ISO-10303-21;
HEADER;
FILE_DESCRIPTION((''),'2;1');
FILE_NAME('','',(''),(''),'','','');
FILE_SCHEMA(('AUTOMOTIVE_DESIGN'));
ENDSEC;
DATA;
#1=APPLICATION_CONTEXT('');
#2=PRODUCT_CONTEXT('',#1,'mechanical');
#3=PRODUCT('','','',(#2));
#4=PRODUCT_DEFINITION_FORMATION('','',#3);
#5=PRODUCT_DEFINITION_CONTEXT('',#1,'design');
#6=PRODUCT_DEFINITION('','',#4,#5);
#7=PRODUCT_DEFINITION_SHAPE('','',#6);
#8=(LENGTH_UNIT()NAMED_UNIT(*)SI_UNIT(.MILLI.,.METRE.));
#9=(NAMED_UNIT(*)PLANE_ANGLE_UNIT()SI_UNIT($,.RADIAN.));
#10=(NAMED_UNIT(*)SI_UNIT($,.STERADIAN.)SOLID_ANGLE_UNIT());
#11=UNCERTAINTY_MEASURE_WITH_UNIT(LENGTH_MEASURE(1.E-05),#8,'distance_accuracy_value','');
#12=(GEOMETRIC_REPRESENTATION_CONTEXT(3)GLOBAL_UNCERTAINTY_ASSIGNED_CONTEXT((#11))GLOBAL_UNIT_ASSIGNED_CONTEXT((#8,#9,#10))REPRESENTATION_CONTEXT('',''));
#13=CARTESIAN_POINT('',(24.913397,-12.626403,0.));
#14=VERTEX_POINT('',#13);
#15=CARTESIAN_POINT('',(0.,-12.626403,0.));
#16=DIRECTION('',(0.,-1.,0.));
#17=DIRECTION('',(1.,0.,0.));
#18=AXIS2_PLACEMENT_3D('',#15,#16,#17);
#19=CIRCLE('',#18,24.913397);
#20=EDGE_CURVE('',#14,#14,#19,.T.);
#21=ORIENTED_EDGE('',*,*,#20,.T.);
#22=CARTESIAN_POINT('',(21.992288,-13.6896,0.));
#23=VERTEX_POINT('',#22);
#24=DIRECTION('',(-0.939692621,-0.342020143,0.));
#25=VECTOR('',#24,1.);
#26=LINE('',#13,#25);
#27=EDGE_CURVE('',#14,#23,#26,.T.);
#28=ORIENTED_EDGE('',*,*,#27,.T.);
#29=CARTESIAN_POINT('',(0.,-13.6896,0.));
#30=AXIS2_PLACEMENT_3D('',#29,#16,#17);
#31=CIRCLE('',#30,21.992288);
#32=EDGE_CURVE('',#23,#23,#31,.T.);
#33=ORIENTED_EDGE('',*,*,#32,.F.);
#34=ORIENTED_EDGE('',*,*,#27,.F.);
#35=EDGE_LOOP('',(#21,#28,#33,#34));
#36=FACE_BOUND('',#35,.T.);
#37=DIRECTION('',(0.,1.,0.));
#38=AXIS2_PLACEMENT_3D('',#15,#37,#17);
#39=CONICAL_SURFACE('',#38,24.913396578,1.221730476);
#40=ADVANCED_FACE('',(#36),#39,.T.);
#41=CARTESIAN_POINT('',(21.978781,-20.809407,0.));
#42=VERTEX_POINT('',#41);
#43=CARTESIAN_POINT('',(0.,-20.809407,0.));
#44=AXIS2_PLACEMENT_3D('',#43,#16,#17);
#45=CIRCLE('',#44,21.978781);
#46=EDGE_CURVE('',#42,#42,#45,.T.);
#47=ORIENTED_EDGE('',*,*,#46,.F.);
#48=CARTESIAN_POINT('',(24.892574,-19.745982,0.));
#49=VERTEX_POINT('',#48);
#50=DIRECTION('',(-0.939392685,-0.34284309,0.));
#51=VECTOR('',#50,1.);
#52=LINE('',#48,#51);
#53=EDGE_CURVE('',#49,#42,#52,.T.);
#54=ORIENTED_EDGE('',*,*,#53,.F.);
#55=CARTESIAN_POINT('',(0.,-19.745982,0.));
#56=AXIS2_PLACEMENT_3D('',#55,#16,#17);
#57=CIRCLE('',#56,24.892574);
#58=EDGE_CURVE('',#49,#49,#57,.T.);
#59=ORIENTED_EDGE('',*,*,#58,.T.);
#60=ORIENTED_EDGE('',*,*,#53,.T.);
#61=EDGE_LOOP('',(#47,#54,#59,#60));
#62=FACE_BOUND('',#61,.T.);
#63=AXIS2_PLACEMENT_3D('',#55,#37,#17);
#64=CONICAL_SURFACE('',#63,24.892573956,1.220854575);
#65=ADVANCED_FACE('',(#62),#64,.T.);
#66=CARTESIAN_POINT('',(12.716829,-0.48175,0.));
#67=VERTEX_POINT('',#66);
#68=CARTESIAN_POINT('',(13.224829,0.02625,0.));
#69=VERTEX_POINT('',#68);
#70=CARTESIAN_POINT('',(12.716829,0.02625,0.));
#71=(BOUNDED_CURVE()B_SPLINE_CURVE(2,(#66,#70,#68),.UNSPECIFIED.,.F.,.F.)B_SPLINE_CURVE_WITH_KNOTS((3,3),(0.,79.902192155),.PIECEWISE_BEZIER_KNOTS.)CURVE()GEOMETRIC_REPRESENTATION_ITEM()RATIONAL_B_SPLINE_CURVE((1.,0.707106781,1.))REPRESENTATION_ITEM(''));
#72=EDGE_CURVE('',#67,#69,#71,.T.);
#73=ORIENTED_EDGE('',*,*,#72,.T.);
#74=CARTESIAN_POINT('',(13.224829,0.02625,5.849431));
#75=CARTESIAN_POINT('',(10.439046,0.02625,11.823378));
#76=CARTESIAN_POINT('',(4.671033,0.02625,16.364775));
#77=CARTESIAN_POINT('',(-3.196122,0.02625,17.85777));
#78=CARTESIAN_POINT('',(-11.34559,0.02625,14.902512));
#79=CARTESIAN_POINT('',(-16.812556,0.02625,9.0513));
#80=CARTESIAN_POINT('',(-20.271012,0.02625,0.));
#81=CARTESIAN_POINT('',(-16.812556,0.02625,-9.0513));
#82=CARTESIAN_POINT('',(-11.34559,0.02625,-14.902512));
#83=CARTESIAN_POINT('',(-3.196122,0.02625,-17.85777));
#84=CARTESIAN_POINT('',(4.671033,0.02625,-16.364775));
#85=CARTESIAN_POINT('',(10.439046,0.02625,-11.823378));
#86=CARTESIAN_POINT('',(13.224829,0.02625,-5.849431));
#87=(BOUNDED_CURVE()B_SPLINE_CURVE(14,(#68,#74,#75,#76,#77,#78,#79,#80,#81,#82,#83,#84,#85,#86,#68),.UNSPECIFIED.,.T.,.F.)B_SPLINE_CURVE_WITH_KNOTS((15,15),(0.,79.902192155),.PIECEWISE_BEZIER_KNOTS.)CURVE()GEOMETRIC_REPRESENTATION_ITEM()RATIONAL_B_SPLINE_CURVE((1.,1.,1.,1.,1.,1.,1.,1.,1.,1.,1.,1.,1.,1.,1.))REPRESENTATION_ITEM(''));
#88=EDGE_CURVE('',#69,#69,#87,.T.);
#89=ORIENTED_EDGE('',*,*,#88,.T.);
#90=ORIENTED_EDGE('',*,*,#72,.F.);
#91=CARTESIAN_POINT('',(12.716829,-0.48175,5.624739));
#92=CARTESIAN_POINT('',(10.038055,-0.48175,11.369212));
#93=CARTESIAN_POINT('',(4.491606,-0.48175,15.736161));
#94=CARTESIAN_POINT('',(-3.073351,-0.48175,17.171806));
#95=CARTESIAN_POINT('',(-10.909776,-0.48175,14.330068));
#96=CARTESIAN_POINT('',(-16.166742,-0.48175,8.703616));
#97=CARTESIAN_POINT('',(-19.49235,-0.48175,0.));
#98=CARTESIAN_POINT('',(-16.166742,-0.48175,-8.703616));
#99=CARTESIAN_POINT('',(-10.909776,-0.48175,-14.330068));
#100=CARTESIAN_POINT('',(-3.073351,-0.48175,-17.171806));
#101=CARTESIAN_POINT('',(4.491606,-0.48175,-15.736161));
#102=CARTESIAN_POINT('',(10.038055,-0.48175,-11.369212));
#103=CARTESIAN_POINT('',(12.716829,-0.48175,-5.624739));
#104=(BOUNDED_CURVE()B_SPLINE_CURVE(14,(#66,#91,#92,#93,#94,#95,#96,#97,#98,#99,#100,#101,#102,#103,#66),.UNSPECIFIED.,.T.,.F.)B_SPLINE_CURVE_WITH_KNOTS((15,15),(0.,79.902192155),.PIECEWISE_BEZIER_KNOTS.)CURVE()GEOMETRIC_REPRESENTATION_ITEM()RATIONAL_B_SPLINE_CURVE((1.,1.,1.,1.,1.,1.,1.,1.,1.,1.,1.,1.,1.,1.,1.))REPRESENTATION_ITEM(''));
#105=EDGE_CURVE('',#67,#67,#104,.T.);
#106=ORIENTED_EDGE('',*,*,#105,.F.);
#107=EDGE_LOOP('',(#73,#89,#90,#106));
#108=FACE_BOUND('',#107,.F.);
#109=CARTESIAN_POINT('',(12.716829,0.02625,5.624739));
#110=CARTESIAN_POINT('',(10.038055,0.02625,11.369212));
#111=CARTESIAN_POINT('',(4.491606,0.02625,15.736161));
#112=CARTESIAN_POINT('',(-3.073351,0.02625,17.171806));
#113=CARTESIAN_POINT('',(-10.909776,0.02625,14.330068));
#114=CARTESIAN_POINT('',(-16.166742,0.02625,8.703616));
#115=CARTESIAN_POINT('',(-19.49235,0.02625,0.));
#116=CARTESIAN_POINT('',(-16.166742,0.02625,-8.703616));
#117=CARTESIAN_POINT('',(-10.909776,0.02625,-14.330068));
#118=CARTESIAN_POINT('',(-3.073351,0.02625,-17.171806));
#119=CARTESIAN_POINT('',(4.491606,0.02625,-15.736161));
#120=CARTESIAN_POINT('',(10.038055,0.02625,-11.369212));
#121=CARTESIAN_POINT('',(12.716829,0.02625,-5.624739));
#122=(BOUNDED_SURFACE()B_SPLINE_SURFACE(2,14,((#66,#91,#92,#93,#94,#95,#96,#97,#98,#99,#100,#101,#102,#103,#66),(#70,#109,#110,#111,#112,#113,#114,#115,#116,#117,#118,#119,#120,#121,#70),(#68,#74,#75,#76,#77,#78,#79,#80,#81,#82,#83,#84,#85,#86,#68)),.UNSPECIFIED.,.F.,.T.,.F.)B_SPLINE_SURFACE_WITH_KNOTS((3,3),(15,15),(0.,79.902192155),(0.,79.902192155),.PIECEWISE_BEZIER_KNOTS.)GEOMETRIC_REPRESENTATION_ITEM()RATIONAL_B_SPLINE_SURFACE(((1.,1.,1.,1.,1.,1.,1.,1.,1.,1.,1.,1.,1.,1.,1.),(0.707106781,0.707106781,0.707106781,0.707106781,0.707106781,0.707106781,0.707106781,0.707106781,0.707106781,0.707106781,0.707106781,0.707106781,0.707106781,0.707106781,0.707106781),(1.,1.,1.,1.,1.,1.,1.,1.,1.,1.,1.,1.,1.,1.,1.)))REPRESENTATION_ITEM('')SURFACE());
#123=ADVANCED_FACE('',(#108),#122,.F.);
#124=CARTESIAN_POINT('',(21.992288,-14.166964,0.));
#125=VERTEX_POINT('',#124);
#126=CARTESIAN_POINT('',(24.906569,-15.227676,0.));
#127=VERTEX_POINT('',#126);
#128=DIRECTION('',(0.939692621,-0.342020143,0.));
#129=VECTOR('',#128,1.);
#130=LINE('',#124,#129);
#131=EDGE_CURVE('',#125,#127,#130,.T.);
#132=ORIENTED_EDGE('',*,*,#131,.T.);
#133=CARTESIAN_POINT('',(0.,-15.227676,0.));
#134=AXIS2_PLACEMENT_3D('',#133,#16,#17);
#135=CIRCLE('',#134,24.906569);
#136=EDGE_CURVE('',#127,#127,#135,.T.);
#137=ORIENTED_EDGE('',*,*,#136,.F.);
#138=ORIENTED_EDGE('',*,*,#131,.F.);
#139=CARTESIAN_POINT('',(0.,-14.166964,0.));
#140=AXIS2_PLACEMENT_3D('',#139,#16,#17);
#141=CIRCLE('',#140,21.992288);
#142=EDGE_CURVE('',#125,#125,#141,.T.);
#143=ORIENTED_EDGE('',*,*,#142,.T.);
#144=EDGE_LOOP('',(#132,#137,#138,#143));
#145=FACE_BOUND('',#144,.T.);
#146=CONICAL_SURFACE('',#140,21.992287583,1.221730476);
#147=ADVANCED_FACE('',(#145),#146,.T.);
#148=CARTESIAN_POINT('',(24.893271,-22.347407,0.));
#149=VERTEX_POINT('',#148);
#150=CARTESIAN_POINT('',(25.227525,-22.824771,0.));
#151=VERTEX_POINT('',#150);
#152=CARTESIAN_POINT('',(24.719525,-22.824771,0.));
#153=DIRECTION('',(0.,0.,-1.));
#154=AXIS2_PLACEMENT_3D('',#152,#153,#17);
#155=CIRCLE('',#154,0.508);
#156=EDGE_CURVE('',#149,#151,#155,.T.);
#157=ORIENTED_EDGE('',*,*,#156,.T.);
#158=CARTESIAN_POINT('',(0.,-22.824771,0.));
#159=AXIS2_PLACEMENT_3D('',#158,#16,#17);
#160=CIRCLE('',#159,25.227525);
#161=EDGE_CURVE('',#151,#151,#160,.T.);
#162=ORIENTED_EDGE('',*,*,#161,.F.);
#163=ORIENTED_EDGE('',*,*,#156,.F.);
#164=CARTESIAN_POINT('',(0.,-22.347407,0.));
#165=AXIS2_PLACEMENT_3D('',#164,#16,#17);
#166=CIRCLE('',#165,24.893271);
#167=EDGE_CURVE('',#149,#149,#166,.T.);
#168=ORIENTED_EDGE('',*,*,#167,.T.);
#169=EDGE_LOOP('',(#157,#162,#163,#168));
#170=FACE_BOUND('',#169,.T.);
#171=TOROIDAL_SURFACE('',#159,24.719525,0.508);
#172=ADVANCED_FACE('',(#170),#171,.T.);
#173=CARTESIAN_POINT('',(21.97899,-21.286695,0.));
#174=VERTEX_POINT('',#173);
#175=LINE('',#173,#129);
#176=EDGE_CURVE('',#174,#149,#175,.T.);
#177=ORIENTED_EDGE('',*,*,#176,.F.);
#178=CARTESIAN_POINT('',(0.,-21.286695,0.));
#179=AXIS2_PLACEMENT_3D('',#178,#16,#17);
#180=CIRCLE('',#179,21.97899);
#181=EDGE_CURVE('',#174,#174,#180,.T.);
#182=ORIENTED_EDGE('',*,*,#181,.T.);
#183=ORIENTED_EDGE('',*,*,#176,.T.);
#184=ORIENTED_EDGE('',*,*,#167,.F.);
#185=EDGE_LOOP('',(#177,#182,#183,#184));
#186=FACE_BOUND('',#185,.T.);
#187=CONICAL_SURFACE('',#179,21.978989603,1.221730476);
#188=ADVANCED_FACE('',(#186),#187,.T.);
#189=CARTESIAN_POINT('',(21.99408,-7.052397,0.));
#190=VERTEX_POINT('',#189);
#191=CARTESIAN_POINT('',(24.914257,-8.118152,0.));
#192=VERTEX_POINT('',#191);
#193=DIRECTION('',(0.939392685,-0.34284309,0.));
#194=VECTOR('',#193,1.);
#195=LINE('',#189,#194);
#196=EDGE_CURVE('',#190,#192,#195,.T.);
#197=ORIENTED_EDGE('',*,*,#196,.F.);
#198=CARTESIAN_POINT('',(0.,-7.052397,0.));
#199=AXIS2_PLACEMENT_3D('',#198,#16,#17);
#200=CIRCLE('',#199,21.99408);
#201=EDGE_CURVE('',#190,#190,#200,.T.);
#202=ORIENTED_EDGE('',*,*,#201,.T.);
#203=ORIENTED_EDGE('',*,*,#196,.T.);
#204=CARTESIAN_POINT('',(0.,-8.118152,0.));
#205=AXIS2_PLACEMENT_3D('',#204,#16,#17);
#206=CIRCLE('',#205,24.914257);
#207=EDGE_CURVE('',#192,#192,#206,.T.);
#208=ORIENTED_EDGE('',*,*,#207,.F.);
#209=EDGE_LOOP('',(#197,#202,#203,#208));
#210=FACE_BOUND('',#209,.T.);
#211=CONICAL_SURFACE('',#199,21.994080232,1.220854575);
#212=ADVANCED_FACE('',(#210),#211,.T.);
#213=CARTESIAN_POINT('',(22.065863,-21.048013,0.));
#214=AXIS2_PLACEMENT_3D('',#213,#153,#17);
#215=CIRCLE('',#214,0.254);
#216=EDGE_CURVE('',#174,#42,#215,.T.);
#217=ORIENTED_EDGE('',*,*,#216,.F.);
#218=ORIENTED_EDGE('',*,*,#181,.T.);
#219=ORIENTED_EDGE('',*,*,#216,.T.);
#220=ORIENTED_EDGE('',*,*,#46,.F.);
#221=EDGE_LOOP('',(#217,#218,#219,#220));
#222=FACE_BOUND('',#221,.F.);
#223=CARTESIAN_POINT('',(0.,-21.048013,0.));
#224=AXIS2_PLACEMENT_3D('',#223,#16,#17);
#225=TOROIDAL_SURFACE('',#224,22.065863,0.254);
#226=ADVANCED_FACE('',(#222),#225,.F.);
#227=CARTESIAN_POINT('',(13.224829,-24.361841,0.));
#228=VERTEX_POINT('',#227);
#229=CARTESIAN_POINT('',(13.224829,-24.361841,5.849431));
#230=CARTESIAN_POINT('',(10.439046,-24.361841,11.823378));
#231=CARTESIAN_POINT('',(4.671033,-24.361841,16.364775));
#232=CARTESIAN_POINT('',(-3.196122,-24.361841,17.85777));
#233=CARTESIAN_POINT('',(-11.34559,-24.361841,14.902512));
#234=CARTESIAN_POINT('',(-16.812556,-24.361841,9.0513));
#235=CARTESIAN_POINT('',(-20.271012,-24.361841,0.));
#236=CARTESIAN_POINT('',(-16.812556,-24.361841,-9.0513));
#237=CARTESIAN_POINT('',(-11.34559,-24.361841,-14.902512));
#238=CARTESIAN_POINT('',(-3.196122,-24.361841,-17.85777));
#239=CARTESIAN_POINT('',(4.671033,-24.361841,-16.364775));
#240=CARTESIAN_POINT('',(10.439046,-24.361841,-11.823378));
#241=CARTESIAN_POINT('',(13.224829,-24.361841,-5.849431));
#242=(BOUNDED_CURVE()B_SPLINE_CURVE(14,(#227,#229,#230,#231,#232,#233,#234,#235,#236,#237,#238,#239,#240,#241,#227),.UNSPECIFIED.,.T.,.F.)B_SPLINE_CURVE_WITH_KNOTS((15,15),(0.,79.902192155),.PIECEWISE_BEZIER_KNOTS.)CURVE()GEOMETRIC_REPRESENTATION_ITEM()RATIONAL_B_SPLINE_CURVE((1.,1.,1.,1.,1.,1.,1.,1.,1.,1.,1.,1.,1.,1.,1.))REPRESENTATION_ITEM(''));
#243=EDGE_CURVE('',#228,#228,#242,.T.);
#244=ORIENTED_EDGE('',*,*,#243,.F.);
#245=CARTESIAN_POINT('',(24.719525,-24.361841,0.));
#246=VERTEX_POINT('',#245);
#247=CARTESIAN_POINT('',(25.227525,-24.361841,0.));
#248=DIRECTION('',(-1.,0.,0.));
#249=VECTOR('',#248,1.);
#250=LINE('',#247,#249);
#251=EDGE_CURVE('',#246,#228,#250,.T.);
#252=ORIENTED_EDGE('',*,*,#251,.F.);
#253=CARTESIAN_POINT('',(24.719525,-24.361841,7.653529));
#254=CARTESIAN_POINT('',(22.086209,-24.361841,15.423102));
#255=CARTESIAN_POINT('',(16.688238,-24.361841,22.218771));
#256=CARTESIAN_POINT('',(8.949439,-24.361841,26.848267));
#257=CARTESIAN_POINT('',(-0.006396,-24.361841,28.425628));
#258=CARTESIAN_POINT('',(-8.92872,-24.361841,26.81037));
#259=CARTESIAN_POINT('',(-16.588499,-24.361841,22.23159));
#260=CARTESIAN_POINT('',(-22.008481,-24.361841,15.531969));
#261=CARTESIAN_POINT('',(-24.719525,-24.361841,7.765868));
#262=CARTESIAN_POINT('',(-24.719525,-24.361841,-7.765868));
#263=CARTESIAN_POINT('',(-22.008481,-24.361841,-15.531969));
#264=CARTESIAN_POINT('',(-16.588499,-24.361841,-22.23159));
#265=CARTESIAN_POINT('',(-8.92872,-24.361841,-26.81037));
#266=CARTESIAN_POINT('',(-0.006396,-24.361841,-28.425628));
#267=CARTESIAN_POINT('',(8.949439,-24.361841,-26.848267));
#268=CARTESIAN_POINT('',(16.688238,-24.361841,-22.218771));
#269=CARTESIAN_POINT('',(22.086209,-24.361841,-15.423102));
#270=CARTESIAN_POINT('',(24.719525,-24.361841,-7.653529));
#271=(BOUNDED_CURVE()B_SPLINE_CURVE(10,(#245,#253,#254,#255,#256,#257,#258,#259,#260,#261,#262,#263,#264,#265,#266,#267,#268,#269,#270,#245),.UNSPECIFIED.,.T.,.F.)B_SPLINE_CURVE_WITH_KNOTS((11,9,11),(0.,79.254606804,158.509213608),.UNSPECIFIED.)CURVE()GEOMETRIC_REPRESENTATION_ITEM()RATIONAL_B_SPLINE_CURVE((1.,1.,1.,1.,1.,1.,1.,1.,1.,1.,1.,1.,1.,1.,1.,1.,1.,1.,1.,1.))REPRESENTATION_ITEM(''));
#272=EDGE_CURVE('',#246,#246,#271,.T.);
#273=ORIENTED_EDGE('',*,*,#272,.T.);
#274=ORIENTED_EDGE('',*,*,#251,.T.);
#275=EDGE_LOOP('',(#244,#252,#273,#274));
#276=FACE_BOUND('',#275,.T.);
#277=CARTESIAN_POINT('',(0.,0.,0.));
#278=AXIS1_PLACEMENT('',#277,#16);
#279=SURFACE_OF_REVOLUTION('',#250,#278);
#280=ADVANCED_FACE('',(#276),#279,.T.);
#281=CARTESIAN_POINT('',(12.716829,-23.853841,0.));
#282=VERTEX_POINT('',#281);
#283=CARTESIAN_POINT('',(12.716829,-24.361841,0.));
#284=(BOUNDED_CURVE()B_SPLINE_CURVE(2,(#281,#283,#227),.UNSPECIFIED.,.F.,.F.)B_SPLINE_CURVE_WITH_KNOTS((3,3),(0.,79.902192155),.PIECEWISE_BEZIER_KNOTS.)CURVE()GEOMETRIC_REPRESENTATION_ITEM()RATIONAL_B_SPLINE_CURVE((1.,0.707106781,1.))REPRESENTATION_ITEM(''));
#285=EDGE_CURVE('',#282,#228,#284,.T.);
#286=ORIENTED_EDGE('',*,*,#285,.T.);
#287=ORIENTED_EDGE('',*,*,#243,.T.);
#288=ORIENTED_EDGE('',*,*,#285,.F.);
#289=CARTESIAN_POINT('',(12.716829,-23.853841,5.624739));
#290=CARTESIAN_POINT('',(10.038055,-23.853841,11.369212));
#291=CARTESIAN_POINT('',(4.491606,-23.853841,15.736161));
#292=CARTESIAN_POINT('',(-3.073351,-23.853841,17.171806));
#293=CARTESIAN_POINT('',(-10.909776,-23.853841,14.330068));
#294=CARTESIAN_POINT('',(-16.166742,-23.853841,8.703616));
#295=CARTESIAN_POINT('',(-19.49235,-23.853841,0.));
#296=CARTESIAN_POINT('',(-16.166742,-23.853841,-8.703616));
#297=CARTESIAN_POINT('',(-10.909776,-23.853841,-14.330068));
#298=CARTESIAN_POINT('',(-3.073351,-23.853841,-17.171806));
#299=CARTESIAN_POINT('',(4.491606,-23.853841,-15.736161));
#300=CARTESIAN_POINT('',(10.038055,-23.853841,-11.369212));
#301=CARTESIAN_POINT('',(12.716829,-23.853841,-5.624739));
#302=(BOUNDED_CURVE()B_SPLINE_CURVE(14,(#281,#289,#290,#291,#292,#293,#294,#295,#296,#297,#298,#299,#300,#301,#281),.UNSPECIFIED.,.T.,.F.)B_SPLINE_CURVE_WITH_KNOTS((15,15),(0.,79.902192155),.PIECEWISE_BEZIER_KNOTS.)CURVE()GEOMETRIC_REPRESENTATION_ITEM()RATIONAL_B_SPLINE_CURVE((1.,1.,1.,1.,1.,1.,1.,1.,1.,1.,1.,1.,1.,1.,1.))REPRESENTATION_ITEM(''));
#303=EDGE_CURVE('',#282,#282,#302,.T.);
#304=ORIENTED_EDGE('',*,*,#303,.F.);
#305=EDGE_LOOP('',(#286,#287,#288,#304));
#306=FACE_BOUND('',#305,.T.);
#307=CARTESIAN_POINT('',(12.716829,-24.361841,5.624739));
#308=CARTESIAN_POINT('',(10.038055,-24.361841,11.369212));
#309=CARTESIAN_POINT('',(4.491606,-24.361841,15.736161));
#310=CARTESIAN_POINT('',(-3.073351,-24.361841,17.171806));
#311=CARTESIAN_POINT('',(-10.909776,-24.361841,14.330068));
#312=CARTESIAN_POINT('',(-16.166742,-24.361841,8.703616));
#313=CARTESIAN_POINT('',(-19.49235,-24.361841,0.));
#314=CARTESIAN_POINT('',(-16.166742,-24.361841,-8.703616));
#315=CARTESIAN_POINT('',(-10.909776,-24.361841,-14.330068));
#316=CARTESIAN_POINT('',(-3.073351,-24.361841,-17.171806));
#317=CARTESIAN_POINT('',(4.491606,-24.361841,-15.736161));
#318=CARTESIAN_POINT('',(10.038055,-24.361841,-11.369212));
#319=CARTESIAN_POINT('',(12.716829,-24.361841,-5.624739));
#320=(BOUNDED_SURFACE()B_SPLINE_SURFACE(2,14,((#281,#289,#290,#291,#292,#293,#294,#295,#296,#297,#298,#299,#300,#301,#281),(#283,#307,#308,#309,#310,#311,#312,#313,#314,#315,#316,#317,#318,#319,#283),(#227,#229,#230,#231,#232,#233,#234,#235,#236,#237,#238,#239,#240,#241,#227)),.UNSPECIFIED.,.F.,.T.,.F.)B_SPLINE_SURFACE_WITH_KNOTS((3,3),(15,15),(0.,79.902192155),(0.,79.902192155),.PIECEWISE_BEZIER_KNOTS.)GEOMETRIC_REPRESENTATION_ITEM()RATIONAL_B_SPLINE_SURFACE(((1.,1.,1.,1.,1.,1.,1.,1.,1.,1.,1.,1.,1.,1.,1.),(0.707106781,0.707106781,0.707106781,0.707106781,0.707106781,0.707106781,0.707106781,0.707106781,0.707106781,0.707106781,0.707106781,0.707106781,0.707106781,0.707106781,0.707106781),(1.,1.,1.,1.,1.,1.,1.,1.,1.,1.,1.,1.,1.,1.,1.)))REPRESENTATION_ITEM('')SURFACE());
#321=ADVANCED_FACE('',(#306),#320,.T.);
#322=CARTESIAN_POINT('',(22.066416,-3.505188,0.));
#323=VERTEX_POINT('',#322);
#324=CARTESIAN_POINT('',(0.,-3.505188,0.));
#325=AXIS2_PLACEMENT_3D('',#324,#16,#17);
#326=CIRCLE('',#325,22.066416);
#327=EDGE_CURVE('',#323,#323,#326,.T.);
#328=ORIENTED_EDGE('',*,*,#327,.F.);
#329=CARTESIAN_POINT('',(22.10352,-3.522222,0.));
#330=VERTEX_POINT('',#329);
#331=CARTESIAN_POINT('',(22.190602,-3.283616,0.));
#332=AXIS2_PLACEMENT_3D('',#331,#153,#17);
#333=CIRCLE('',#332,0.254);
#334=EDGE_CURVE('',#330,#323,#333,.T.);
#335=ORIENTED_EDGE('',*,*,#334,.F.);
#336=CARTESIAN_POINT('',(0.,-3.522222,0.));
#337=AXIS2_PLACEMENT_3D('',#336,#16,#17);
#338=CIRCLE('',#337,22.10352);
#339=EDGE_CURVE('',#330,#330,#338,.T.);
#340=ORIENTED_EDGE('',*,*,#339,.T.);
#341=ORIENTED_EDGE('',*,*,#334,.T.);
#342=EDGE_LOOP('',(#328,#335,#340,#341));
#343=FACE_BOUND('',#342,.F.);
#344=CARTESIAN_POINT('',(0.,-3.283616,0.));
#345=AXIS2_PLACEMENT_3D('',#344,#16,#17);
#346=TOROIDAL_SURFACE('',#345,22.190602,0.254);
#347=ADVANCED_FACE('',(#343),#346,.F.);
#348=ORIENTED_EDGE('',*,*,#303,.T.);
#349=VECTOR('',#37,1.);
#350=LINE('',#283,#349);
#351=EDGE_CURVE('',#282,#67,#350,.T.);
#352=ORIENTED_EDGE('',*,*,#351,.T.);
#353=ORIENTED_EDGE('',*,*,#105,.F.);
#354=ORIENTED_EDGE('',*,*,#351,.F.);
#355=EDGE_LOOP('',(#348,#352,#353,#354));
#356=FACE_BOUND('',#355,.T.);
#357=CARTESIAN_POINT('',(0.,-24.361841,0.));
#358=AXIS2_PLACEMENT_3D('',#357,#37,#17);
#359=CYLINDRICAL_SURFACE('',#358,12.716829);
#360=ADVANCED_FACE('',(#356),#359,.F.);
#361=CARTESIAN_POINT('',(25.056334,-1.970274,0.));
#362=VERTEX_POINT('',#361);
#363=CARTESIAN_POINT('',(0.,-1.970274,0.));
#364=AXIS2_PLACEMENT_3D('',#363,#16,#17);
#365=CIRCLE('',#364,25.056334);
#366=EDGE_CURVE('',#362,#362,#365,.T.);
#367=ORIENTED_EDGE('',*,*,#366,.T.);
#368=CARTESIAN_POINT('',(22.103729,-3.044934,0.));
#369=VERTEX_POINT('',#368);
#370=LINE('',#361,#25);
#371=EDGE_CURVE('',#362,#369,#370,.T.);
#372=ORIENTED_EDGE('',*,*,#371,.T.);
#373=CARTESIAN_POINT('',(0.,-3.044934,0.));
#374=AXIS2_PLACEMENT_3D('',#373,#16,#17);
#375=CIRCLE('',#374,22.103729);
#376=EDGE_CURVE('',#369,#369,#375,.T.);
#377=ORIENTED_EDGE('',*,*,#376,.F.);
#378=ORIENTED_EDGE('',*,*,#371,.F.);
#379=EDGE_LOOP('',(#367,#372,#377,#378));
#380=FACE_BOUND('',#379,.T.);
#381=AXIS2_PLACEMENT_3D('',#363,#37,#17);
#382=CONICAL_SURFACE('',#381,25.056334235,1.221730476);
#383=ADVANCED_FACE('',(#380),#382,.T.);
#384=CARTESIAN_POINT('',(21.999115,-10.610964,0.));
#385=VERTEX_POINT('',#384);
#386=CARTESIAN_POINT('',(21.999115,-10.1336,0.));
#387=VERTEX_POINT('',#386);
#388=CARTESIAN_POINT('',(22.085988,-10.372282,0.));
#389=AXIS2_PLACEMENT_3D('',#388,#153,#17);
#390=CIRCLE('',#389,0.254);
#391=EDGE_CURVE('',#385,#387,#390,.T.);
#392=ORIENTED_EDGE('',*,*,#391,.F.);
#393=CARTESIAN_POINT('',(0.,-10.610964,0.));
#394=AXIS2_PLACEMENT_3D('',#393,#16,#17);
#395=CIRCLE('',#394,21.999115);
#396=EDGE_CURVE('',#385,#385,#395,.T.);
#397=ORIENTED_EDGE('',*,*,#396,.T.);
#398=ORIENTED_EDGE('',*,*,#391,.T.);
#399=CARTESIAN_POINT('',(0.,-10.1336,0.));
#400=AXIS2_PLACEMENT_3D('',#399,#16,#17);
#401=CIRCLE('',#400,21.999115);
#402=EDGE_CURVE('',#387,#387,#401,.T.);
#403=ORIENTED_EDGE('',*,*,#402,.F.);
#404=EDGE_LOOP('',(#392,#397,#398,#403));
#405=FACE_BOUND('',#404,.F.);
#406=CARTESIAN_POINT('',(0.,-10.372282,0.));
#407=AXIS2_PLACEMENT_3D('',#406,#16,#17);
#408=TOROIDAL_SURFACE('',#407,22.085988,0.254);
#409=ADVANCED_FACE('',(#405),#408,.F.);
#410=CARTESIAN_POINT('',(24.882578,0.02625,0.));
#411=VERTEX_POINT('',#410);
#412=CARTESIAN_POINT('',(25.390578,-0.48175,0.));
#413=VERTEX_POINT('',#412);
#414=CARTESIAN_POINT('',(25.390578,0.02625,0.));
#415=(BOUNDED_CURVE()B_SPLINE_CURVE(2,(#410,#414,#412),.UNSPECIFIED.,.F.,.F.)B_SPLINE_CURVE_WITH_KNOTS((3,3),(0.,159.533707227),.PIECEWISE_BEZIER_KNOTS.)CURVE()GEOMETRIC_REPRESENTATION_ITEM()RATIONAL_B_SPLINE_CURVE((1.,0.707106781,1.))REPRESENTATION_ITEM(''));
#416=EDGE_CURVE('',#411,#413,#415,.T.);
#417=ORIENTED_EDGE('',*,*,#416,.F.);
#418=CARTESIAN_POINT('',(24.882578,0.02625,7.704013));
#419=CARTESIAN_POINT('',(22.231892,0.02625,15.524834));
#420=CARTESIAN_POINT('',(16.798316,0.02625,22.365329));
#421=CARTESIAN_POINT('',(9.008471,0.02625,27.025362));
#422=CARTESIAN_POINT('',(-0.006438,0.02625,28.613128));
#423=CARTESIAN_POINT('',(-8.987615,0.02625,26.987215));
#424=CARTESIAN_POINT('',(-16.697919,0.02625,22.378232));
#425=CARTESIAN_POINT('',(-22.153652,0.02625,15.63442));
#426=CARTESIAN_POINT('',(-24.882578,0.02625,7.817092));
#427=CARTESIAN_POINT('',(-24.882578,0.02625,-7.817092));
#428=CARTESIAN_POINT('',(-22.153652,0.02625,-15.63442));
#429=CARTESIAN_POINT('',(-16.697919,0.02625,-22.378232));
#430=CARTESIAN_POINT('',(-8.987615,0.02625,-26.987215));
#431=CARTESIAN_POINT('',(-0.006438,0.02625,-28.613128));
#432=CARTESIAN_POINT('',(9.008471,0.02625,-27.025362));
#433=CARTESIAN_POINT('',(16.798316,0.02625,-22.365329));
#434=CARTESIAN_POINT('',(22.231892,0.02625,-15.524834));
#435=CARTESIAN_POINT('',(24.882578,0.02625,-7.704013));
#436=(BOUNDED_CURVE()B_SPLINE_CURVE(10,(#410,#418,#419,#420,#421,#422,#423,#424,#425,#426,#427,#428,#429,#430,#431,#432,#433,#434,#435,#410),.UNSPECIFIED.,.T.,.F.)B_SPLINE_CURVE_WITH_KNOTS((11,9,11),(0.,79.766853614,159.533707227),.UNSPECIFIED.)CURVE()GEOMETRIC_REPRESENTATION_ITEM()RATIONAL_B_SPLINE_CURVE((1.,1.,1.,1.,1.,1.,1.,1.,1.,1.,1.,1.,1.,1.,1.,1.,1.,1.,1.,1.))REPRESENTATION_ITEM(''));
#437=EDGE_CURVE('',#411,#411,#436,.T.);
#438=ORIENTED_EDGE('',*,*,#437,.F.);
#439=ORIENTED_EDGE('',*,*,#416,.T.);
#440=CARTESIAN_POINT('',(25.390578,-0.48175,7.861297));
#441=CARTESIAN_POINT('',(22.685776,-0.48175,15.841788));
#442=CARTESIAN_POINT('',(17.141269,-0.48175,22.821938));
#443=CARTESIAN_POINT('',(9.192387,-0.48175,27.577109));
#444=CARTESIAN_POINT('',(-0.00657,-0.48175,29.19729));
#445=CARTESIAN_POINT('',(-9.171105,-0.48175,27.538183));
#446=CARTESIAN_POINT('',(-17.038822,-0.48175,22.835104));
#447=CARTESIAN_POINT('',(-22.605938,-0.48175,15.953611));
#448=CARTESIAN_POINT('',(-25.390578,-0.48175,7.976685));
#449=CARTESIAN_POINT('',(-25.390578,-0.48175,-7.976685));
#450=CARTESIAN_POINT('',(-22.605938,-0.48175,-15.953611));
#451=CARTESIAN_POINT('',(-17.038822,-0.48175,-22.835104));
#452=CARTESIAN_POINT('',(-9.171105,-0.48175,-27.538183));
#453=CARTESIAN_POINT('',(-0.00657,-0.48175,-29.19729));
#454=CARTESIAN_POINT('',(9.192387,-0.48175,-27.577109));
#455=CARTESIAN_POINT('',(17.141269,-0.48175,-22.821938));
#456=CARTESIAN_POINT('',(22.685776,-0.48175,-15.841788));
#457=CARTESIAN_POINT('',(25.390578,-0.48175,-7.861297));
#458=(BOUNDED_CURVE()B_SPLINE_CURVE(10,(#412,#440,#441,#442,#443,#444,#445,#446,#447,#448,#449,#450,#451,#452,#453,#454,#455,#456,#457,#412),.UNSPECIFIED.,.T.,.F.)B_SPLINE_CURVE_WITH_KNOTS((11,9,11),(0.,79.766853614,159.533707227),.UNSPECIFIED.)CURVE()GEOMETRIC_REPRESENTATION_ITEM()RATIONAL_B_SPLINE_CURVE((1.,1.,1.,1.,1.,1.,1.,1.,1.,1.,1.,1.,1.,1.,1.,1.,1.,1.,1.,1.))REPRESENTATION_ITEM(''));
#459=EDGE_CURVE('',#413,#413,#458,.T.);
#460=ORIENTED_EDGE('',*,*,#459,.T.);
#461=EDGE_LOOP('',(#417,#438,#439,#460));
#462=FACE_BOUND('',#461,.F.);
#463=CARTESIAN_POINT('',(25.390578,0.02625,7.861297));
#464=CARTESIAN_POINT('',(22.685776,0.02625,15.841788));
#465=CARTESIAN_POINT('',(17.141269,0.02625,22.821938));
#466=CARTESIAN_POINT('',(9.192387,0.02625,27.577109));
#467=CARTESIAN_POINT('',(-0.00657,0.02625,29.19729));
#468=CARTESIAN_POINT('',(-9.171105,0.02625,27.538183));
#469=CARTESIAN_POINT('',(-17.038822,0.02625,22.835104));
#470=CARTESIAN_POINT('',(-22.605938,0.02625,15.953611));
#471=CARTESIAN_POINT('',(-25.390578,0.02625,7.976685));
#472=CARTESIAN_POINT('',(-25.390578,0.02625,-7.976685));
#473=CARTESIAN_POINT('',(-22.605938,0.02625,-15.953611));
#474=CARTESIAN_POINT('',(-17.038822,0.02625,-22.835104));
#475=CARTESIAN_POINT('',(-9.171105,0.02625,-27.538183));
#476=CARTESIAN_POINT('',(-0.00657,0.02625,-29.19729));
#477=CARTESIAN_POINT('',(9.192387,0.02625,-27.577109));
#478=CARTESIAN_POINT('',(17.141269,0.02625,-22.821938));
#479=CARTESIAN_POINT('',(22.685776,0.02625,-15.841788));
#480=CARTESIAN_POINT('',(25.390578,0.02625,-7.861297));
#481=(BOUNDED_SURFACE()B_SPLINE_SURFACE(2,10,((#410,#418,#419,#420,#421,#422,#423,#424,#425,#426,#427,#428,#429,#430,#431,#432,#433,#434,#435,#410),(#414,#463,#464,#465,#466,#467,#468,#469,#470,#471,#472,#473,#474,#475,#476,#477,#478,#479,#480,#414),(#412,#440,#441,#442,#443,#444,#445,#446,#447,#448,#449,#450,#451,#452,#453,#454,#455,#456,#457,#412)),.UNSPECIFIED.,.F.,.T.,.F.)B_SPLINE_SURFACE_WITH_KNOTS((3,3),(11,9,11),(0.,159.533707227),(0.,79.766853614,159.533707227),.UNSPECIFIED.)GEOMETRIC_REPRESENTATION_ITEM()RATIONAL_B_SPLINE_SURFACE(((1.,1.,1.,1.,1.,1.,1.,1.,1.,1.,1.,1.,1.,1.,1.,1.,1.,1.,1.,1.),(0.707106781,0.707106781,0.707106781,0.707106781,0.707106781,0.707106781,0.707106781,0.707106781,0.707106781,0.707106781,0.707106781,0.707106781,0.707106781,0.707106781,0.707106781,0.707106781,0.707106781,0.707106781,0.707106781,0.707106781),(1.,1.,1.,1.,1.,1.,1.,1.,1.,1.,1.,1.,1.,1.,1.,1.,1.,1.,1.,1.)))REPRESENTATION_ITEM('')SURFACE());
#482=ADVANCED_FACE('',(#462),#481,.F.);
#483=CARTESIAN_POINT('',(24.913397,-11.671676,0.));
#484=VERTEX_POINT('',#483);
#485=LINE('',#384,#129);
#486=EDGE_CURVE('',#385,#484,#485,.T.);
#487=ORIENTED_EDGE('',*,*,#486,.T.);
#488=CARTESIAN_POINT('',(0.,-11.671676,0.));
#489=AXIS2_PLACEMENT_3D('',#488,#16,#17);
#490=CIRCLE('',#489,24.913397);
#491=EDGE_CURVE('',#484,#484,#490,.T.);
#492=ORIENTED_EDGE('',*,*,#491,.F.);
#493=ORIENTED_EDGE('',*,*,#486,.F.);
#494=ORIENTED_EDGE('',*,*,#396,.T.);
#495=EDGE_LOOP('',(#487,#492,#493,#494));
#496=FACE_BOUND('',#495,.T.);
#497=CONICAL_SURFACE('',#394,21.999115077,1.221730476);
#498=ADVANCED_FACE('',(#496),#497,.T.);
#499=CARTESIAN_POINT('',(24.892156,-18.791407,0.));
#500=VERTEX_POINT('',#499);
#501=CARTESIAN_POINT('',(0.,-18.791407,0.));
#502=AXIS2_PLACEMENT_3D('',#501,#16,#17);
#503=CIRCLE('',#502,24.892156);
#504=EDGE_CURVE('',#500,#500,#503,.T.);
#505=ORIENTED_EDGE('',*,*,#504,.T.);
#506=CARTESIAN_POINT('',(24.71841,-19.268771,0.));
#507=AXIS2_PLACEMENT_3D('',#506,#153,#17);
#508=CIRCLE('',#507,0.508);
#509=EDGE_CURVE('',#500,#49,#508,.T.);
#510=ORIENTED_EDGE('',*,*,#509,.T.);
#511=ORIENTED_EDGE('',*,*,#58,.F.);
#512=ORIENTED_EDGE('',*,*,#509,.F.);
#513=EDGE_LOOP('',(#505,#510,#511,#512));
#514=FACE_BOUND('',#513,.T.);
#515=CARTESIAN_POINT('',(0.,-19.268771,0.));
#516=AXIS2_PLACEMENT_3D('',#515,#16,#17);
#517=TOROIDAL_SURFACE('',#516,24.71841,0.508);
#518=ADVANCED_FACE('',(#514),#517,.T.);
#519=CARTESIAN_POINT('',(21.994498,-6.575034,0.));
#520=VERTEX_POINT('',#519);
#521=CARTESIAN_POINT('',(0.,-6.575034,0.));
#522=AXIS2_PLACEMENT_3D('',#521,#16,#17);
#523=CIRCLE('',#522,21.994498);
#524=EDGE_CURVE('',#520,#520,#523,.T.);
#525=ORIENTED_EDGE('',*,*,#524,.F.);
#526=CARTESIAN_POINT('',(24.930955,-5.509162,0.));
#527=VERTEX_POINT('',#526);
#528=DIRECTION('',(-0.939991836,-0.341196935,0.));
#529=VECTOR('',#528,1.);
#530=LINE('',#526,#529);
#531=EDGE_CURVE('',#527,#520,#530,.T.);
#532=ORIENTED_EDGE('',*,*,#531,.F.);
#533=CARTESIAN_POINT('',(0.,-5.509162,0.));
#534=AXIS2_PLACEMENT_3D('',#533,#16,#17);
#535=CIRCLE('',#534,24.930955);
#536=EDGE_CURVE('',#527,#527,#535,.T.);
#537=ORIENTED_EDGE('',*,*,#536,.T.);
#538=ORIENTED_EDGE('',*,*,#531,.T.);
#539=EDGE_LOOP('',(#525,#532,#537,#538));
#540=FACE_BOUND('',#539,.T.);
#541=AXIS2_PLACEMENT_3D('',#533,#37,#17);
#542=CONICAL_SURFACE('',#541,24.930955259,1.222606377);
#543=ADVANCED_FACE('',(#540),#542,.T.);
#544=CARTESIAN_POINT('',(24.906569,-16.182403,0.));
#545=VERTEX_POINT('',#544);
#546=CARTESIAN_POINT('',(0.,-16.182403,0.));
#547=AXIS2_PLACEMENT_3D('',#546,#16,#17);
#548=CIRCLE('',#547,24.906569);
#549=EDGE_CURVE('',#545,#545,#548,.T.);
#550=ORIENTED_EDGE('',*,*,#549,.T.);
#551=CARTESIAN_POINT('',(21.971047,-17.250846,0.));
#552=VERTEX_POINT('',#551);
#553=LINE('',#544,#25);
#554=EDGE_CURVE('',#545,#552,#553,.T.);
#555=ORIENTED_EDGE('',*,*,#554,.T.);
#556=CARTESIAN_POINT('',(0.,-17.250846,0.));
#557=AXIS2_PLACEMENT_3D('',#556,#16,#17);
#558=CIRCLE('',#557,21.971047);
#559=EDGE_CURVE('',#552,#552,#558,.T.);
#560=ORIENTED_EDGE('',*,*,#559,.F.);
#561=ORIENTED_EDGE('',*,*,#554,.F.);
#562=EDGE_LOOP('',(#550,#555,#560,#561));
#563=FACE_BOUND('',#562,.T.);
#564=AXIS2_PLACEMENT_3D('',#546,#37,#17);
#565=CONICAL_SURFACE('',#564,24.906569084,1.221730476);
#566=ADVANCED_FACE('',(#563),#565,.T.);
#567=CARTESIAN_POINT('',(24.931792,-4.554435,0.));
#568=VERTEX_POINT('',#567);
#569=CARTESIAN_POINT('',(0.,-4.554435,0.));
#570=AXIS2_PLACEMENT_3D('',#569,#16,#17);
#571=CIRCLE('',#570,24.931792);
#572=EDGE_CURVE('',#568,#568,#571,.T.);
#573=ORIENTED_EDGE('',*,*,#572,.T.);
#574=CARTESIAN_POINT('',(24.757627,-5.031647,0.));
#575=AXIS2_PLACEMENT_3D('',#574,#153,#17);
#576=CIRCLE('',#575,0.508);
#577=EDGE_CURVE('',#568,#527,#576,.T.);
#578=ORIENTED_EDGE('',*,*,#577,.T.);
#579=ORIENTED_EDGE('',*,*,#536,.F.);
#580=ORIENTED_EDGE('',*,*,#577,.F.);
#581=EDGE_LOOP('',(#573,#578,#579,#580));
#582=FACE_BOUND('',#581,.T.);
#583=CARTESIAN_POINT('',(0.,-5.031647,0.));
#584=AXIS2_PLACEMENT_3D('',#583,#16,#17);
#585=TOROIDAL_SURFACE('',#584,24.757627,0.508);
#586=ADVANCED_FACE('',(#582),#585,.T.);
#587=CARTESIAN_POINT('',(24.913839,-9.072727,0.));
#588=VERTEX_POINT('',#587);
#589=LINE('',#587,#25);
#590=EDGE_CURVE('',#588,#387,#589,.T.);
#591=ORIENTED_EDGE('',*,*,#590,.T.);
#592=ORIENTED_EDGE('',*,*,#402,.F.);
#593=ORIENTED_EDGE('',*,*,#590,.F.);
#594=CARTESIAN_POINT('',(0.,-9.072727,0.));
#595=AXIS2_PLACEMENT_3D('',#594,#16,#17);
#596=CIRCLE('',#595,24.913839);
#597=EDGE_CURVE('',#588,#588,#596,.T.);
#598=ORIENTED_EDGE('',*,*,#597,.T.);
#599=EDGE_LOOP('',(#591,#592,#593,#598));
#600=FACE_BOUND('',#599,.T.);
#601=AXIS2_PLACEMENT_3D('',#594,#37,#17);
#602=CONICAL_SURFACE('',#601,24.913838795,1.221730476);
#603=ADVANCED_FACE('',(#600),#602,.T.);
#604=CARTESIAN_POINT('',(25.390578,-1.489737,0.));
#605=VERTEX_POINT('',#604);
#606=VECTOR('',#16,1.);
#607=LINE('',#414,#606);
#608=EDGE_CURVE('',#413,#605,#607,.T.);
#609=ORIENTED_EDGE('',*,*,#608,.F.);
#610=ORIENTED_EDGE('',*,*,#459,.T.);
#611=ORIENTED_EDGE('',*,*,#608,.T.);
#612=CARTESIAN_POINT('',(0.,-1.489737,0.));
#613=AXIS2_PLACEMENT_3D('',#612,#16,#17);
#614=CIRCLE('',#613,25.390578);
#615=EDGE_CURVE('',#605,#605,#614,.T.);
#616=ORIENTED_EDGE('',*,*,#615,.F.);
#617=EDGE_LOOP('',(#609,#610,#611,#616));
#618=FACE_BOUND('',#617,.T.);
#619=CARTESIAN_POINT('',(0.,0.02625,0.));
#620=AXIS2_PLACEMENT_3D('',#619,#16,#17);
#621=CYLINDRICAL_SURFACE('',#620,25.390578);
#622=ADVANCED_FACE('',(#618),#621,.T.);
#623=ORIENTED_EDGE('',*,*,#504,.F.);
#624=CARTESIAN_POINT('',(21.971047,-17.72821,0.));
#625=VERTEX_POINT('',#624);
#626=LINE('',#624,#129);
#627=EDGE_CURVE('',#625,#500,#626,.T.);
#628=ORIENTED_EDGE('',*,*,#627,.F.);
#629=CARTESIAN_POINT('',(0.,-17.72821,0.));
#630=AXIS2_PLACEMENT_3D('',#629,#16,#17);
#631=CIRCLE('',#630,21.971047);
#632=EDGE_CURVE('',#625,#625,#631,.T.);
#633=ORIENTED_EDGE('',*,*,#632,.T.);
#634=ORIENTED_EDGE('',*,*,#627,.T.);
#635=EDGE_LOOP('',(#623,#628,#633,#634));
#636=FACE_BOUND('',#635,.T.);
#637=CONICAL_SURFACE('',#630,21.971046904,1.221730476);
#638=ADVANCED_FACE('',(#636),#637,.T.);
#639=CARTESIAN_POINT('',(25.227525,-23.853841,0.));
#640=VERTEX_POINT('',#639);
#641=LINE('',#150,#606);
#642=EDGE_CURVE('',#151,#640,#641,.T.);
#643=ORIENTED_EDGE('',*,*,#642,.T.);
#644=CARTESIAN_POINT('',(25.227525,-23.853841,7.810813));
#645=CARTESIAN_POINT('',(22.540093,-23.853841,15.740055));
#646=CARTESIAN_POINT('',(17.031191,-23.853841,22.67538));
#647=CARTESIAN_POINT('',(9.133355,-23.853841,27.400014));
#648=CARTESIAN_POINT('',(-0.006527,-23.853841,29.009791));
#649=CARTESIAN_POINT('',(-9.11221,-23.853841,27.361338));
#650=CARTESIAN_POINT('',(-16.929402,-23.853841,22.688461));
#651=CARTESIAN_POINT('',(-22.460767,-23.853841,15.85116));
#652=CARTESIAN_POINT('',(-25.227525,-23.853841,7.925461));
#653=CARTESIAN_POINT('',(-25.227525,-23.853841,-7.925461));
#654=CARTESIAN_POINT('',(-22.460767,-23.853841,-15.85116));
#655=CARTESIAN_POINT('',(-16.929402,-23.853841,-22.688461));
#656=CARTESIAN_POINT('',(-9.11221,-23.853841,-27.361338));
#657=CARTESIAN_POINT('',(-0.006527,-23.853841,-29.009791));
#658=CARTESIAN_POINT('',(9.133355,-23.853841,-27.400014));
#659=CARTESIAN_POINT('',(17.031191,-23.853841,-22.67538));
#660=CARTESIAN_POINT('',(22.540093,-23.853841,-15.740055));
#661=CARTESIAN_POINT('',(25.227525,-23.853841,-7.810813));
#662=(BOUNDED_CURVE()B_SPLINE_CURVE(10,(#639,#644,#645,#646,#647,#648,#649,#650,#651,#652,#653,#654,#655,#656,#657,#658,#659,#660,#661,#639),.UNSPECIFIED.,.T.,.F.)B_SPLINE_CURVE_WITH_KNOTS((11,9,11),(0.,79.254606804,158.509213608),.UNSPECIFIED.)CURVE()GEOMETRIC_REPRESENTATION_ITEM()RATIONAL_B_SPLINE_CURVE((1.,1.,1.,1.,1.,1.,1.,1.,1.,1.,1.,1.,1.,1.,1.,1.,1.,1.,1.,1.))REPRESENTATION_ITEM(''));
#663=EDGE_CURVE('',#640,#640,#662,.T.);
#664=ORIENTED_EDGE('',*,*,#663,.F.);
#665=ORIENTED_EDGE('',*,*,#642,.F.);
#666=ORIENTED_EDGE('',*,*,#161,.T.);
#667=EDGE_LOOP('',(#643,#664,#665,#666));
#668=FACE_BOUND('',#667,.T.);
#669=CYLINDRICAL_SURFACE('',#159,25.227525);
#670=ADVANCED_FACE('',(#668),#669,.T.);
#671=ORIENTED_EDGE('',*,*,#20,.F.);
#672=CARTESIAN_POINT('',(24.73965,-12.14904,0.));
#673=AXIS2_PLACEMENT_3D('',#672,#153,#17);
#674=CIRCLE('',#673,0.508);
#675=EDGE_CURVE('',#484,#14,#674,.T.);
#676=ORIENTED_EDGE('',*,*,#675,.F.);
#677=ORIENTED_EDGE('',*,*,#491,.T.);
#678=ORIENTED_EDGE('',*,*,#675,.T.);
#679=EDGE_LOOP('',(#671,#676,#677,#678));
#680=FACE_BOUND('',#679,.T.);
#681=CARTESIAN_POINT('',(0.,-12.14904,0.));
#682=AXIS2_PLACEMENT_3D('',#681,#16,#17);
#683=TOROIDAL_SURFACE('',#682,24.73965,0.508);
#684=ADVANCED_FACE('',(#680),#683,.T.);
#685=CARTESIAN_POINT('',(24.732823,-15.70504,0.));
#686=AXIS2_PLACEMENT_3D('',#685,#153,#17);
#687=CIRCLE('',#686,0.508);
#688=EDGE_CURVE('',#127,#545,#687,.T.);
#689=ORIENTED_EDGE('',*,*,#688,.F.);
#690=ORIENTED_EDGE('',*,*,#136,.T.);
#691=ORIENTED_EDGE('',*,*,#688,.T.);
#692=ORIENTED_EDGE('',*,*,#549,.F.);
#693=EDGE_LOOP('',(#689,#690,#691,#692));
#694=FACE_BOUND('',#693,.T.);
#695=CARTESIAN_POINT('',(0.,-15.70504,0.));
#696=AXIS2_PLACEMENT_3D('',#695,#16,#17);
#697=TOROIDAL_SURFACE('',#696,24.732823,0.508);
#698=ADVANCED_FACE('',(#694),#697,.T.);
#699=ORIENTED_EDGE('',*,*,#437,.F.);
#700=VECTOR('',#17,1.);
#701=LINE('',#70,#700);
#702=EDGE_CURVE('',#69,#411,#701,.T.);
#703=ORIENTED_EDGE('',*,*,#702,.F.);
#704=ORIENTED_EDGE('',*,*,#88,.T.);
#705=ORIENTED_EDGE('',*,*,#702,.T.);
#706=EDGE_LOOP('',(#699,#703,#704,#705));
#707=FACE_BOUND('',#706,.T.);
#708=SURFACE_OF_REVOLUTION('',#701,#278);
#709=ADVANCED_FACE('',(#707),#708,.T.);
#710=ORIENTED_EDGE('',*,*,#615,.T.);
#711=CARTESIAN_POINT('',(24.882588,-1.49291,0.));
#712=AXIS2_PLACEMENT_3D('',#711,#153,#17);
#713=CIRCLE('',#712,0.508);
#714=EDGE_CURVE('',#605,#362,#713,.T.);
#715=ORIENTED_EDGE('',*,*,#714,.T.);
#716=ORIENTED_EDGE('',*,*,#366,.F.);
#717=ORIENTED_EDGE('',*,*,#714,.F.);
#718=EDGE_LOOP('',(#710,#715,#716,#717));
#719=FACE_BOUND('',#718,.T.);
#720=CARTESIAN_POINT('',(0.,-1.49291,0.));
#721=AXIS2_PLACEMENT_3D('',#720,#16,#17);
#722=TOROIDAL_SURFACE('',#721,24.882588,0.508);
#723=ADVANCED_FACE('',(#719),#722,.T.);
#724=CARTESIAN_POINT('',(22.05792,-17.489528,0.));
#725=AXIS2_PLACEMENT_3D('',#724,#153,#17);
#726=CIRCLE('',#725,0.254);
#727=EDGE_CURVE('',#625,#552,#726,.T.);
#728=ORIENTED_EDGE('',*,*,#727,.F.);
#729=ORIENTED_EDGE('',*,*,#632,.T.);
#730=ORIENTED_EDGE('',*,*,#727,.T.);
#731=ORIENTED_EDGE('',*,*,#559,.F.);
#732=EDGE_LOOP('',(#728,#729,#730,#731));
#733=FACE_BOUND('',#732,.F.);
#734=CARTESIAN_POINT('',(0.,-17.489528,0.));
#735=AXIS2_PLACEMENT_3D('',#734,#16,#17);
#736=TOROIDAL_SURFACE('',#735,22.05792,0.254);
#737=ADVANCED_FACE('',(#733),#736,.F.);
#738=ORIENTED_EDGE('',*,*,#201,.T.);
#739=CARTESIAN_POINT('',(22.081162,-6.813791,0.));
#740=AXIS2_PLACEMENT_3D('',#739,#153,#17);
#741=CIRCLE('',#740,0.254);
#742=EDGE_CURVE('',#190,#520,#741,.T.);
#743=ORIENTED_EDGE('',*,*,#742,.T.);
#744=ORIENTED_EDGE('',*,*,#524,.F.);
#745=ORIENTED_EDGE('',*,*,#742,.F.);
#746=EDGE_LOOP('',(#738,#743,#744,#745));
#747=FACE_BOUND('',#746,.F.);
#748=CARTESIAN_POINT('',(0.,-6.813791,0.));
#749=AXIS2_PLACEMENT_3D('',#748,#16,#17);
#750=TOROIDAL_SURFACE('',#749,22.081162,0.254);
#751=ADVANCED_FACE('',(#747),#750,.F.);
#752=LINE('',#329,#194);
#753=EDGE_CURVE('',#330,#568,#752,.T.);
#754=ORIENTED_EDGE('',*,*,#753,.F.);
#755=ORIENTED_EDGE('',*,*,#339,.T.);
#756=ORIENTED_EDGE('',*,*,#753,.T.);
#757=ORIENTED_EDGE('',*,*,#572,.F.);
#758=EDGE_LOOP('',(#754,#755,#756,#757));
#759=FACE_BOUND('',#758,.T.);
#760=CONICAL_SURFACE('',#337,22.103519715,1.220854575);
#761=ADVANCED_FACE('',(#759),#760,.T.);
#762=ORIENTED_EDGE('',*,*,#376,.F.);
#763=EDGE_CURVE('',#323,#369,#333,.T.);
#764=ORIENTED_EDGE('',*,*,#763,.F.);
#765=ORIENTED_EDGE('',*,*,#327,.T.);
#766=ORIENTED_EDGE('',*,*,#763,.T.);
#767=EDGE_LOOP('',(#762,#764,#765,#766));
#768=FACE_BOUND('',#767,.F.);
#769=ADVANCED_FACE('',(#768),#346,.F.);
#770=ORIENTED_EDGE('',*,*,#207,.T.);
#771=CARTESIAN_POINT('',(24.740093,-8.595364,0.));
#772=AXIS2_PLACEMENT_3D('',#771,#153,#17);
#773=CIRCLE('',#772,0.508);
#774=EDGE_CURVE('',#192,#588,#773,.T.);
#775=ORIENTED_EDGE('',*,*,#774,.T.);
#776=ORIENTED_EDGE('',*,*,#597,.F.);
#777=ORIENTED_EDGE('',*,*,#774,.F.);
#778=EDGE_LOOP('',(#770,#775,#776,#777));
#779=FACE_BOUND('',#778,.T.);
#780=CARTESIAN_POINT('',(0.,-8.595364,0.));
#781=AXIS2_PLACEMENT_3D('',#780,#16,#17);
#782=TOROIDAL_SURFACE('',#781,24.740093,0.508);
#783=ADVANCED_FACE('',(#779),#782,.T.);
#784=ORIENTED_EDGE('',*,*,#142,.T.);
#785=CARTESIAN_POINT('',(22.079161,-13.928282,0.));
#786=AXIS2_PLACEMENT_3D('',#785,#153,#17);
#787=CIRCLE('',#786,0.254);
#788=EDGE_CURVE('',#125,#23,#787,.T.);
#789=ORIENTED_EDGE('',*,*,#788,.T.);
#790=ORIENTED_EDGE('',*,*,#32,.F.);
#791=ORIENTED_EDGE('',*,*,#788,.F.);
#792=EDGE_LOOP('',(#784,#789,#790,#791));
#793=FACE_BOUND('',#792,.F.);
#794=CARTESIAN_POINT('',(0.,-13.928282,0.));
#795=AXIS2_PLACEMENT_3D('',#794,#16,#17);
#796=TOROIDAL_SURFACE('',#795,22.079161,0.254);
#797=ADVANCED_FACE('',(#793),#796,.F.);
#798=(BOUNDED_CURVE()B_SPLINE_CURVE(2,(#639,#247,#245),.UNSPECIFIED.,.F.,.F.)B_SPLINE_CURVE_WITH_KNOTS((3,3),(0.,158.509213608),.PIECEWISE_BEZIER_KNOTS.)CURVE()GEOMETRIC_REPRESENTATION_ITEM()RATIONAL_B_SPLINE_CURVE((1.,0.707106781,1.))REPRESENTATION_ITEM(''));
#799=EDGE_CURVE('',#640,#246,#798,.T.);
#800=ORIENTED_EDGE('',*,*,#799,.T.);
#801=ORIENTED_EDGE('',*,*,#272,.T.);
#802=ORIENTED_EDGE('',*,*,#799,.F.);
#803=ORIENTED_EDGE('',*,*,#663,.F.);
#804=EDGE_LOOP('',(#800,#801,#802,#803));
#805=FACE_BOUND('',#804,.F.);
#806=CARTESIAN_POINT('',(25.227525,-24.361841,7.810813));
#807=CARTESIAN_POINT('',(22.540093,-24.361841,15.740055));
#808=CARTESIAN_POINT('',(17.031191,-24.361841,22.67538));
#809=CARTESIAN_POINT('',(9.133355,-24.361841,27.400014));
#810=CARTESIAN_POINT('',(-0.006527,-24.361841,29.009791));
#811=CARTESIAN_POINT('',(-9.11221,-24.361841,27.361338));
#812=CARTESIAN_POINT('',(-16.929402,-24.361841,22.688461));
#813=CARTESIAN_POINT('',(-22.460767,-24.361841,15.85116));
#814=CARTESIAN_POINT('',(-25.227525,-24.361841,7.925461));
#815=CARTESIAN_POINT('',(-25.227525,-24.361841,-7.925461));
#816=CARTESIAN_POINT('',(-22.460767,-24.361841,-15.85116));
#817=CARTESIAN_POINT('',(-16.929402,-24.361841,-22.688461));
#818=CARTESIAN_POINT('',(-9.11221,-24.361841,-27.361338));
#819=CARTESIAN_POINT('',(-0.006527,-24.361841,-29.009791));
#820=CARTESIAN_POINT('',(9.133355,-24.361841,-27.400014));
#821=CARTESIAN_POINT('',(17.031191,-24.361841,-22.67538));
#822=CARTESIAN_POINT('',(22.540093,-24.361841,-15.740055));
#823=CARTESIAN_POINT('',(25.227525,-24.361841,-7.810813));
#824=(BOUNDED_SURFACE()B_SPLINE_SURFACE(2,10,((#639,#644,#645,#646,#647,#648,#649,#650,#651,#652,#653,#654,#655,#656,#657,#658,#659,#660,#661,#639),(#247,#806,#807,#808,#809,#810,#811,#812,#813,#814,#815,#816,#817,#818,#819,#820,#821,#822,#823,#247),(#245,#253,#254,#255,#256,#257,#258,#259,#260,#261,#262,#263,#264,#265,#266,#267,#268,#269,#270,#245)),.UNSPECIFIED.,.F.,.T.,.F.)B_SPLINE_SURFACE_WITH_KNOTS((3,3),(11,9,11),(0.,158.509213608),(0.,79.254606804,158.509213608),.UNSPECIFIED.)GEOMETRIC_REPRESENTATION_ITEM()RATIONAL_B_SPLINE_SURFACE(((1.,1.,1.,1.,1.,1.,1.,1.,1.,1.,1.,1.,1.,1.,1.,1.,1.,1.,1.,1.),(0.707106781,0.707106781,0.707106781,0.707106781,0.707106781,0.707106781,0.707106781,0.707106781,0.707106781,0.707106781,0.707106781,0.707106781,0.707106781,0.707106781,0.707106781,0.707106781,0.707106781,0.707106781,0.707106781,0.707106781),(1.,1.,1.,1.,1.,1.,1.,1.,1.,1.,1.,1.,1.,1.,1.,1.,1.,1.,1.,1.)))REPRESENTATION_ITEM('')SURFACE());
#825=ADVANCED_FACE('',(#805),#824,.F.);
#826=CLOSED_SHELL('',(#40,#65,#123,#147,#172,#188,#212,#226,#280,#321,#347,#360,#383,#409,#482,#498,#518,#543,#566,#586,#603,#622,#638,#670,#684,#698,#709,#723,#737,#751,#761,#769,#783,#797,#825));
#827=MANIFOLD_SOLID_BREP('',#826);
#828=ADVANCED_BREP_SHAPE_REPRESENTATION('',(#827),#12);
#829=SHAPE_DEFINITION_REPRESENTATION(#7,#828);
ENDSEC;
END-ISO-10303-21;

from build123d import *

# Parameters (mm, degrees)
F3_R = 0.508


with BuildPart() as f2:
    # F2: sweep along a path in F0
    with BuildLine(Plane.XZ) as f2_path:
        CenterArc((0, 0), 25.4, 0, 360)
    # F1 (on Right) → F2 (sweep)
    with BuildSketch(Plane.YZ):
        with BuildLine():
            Line((-24.3618413806, 12.7168288454), (0.0262497924, 12.7168288454))
            Line((0.0262497924, 12.7168288454), (0.0262497924, 25.390578095))
            Line((0.0262497924, 25.390578095), (-1.4897372673, 25.390578095))
            ThreePointArc((-1.4897372673, 25.390578095), (-1.782985913, 25.299625112), (-1.970273827, 25.0563342354))
            Line((-1.970273827, 25.0563342354), (-3.0449343395, 22.1037287434))
            ThreePointArc((-3.0449343395, 22.1037287434), (-3.2630920057, 21.9374324407), (-3.505187821, 22.0664163306))
            ThreePointArc((-3.505187821, 22.0664163306), (-3.5144515996, 22.084625219), (-3.5222220071, 22.1035197151))
            Line((-3.5222220071, 22.1035197151), (-4.5544351117, 24.9317915062))
            ThreePointArc((-4.5544351117, 24.9317915062), (-5.0320915531, 25.2656270218), (-5.5091624481, 24.9309552594))
            Line((-5.5091624481, 24.9309552594), (-6.5750335074, 21.9944983557))
            ThreePointArc((-6.5750335074, 21.9944983557), (-6.813568955, 21.8271624745), (-7.0523971757, 21.9940802323))
            Line((-7.0523971757, 21.9940802323), (-8.1181520949, 24.9142568519))
            ThreePointArc((-8.1181520949, 24.9142568519), (-8.5955860575, 25.2480925136), (-9.0727274301, 24.9138387952))
            Line((-9.0727274301, 24.9138387952), (-10.1336001047, 21.9991150768))
            ThreePointArc((-10.1336001047, 21.9991150768), (-10.3722820303, 21.8319881932), (-10.610963956, 21.9991150768))
            Line((-10.610963956, 21.9991150768), (-11.6716756767, 24.9133965778))
            ThreePointArc((-11.6716756767, 24.9133965778), (-12.1490395281, 25.247650345), (-12.6264033794, 24.9133965778))
            Line((-12.6264033794, 24.9133965778), (-13.6896001047, 21.9922875828))
            ThreePointArc((-13.6896001047, 21.9922875828), (-13.9282820303, 21.8251606992), (-14.166963956, 21.9922875828))
            Line((-14.166963956, 21.9922875828), (-15.2276756767, 24.9065690839))
            ThreePointArc((-15.2276756767, 24.9065690839), (-15.7050395281, 25.2408228511), (-16.1824033794, 24.9065690839))
            Line((-16.1824033794, 24.9065690839), (-17.2508460749, 21.971046904))
            ThreePointArc((-17.2508460749, 21.971046904), (-17.4895280006, 21.8039200204), (-17.7282099263, 21.971046904))
            Line((-17.7282099263, 21.971046904), (-18.7914066515, 24.892155899))
            ThreePointArc((-18.7914066515, 24.892155899), (-19.2685480241, 25.2264096175), (-19.7459819867, 24.8925739558))
            Line((-19.7459819867, 24.8925739558), (-20.8094072633, 21.9787805747))
            ThreePointArc((-20.8094072633, 21.9787805747), (-21.0481242446, 21.8118627439), (-21.2866949309, 21.9789896031))
            Line((-21.2866949309, 21.9789896031), (-22.3474066515, 24.8932711042))
            ThreePointArc((-22.3474066515, 24.8932711042), (-22.5333936732, 25.1356541099), (-22.8247705029, 25.2275248714))
            Line((-22.8247705029, 25.2275248714), (-24.3618413806, 25.2275248714))
            Line((-24.3618413806, 25.2275248714), (-24.3618413806, 21.9817499781))
            Line((-24.3618413806, 21.9817499781), (-24.3618413806, 12.7168288454))
        make_face()
    sweep(path=f2_path.line)

    # F3
    f3_edges = [f2.edges().sort_by_distance(p)[0] for p in [
        (-25.390578, 0.02625, 0),
        (25.390578, -0.731744, 0),
        (-25.390578, -1.489737, 0),
        (-25.227525, -22.824771, 0),
        (25.227525, -23.593306, 0),
        (-25.227525, -24.361841, 0),
        (-12.716829, 0.02625, 0),
        (-12.716829, -24.361841, 0),
    ]]
    fillet(f3_edges, radius=F3_R)


solid = f2.part
